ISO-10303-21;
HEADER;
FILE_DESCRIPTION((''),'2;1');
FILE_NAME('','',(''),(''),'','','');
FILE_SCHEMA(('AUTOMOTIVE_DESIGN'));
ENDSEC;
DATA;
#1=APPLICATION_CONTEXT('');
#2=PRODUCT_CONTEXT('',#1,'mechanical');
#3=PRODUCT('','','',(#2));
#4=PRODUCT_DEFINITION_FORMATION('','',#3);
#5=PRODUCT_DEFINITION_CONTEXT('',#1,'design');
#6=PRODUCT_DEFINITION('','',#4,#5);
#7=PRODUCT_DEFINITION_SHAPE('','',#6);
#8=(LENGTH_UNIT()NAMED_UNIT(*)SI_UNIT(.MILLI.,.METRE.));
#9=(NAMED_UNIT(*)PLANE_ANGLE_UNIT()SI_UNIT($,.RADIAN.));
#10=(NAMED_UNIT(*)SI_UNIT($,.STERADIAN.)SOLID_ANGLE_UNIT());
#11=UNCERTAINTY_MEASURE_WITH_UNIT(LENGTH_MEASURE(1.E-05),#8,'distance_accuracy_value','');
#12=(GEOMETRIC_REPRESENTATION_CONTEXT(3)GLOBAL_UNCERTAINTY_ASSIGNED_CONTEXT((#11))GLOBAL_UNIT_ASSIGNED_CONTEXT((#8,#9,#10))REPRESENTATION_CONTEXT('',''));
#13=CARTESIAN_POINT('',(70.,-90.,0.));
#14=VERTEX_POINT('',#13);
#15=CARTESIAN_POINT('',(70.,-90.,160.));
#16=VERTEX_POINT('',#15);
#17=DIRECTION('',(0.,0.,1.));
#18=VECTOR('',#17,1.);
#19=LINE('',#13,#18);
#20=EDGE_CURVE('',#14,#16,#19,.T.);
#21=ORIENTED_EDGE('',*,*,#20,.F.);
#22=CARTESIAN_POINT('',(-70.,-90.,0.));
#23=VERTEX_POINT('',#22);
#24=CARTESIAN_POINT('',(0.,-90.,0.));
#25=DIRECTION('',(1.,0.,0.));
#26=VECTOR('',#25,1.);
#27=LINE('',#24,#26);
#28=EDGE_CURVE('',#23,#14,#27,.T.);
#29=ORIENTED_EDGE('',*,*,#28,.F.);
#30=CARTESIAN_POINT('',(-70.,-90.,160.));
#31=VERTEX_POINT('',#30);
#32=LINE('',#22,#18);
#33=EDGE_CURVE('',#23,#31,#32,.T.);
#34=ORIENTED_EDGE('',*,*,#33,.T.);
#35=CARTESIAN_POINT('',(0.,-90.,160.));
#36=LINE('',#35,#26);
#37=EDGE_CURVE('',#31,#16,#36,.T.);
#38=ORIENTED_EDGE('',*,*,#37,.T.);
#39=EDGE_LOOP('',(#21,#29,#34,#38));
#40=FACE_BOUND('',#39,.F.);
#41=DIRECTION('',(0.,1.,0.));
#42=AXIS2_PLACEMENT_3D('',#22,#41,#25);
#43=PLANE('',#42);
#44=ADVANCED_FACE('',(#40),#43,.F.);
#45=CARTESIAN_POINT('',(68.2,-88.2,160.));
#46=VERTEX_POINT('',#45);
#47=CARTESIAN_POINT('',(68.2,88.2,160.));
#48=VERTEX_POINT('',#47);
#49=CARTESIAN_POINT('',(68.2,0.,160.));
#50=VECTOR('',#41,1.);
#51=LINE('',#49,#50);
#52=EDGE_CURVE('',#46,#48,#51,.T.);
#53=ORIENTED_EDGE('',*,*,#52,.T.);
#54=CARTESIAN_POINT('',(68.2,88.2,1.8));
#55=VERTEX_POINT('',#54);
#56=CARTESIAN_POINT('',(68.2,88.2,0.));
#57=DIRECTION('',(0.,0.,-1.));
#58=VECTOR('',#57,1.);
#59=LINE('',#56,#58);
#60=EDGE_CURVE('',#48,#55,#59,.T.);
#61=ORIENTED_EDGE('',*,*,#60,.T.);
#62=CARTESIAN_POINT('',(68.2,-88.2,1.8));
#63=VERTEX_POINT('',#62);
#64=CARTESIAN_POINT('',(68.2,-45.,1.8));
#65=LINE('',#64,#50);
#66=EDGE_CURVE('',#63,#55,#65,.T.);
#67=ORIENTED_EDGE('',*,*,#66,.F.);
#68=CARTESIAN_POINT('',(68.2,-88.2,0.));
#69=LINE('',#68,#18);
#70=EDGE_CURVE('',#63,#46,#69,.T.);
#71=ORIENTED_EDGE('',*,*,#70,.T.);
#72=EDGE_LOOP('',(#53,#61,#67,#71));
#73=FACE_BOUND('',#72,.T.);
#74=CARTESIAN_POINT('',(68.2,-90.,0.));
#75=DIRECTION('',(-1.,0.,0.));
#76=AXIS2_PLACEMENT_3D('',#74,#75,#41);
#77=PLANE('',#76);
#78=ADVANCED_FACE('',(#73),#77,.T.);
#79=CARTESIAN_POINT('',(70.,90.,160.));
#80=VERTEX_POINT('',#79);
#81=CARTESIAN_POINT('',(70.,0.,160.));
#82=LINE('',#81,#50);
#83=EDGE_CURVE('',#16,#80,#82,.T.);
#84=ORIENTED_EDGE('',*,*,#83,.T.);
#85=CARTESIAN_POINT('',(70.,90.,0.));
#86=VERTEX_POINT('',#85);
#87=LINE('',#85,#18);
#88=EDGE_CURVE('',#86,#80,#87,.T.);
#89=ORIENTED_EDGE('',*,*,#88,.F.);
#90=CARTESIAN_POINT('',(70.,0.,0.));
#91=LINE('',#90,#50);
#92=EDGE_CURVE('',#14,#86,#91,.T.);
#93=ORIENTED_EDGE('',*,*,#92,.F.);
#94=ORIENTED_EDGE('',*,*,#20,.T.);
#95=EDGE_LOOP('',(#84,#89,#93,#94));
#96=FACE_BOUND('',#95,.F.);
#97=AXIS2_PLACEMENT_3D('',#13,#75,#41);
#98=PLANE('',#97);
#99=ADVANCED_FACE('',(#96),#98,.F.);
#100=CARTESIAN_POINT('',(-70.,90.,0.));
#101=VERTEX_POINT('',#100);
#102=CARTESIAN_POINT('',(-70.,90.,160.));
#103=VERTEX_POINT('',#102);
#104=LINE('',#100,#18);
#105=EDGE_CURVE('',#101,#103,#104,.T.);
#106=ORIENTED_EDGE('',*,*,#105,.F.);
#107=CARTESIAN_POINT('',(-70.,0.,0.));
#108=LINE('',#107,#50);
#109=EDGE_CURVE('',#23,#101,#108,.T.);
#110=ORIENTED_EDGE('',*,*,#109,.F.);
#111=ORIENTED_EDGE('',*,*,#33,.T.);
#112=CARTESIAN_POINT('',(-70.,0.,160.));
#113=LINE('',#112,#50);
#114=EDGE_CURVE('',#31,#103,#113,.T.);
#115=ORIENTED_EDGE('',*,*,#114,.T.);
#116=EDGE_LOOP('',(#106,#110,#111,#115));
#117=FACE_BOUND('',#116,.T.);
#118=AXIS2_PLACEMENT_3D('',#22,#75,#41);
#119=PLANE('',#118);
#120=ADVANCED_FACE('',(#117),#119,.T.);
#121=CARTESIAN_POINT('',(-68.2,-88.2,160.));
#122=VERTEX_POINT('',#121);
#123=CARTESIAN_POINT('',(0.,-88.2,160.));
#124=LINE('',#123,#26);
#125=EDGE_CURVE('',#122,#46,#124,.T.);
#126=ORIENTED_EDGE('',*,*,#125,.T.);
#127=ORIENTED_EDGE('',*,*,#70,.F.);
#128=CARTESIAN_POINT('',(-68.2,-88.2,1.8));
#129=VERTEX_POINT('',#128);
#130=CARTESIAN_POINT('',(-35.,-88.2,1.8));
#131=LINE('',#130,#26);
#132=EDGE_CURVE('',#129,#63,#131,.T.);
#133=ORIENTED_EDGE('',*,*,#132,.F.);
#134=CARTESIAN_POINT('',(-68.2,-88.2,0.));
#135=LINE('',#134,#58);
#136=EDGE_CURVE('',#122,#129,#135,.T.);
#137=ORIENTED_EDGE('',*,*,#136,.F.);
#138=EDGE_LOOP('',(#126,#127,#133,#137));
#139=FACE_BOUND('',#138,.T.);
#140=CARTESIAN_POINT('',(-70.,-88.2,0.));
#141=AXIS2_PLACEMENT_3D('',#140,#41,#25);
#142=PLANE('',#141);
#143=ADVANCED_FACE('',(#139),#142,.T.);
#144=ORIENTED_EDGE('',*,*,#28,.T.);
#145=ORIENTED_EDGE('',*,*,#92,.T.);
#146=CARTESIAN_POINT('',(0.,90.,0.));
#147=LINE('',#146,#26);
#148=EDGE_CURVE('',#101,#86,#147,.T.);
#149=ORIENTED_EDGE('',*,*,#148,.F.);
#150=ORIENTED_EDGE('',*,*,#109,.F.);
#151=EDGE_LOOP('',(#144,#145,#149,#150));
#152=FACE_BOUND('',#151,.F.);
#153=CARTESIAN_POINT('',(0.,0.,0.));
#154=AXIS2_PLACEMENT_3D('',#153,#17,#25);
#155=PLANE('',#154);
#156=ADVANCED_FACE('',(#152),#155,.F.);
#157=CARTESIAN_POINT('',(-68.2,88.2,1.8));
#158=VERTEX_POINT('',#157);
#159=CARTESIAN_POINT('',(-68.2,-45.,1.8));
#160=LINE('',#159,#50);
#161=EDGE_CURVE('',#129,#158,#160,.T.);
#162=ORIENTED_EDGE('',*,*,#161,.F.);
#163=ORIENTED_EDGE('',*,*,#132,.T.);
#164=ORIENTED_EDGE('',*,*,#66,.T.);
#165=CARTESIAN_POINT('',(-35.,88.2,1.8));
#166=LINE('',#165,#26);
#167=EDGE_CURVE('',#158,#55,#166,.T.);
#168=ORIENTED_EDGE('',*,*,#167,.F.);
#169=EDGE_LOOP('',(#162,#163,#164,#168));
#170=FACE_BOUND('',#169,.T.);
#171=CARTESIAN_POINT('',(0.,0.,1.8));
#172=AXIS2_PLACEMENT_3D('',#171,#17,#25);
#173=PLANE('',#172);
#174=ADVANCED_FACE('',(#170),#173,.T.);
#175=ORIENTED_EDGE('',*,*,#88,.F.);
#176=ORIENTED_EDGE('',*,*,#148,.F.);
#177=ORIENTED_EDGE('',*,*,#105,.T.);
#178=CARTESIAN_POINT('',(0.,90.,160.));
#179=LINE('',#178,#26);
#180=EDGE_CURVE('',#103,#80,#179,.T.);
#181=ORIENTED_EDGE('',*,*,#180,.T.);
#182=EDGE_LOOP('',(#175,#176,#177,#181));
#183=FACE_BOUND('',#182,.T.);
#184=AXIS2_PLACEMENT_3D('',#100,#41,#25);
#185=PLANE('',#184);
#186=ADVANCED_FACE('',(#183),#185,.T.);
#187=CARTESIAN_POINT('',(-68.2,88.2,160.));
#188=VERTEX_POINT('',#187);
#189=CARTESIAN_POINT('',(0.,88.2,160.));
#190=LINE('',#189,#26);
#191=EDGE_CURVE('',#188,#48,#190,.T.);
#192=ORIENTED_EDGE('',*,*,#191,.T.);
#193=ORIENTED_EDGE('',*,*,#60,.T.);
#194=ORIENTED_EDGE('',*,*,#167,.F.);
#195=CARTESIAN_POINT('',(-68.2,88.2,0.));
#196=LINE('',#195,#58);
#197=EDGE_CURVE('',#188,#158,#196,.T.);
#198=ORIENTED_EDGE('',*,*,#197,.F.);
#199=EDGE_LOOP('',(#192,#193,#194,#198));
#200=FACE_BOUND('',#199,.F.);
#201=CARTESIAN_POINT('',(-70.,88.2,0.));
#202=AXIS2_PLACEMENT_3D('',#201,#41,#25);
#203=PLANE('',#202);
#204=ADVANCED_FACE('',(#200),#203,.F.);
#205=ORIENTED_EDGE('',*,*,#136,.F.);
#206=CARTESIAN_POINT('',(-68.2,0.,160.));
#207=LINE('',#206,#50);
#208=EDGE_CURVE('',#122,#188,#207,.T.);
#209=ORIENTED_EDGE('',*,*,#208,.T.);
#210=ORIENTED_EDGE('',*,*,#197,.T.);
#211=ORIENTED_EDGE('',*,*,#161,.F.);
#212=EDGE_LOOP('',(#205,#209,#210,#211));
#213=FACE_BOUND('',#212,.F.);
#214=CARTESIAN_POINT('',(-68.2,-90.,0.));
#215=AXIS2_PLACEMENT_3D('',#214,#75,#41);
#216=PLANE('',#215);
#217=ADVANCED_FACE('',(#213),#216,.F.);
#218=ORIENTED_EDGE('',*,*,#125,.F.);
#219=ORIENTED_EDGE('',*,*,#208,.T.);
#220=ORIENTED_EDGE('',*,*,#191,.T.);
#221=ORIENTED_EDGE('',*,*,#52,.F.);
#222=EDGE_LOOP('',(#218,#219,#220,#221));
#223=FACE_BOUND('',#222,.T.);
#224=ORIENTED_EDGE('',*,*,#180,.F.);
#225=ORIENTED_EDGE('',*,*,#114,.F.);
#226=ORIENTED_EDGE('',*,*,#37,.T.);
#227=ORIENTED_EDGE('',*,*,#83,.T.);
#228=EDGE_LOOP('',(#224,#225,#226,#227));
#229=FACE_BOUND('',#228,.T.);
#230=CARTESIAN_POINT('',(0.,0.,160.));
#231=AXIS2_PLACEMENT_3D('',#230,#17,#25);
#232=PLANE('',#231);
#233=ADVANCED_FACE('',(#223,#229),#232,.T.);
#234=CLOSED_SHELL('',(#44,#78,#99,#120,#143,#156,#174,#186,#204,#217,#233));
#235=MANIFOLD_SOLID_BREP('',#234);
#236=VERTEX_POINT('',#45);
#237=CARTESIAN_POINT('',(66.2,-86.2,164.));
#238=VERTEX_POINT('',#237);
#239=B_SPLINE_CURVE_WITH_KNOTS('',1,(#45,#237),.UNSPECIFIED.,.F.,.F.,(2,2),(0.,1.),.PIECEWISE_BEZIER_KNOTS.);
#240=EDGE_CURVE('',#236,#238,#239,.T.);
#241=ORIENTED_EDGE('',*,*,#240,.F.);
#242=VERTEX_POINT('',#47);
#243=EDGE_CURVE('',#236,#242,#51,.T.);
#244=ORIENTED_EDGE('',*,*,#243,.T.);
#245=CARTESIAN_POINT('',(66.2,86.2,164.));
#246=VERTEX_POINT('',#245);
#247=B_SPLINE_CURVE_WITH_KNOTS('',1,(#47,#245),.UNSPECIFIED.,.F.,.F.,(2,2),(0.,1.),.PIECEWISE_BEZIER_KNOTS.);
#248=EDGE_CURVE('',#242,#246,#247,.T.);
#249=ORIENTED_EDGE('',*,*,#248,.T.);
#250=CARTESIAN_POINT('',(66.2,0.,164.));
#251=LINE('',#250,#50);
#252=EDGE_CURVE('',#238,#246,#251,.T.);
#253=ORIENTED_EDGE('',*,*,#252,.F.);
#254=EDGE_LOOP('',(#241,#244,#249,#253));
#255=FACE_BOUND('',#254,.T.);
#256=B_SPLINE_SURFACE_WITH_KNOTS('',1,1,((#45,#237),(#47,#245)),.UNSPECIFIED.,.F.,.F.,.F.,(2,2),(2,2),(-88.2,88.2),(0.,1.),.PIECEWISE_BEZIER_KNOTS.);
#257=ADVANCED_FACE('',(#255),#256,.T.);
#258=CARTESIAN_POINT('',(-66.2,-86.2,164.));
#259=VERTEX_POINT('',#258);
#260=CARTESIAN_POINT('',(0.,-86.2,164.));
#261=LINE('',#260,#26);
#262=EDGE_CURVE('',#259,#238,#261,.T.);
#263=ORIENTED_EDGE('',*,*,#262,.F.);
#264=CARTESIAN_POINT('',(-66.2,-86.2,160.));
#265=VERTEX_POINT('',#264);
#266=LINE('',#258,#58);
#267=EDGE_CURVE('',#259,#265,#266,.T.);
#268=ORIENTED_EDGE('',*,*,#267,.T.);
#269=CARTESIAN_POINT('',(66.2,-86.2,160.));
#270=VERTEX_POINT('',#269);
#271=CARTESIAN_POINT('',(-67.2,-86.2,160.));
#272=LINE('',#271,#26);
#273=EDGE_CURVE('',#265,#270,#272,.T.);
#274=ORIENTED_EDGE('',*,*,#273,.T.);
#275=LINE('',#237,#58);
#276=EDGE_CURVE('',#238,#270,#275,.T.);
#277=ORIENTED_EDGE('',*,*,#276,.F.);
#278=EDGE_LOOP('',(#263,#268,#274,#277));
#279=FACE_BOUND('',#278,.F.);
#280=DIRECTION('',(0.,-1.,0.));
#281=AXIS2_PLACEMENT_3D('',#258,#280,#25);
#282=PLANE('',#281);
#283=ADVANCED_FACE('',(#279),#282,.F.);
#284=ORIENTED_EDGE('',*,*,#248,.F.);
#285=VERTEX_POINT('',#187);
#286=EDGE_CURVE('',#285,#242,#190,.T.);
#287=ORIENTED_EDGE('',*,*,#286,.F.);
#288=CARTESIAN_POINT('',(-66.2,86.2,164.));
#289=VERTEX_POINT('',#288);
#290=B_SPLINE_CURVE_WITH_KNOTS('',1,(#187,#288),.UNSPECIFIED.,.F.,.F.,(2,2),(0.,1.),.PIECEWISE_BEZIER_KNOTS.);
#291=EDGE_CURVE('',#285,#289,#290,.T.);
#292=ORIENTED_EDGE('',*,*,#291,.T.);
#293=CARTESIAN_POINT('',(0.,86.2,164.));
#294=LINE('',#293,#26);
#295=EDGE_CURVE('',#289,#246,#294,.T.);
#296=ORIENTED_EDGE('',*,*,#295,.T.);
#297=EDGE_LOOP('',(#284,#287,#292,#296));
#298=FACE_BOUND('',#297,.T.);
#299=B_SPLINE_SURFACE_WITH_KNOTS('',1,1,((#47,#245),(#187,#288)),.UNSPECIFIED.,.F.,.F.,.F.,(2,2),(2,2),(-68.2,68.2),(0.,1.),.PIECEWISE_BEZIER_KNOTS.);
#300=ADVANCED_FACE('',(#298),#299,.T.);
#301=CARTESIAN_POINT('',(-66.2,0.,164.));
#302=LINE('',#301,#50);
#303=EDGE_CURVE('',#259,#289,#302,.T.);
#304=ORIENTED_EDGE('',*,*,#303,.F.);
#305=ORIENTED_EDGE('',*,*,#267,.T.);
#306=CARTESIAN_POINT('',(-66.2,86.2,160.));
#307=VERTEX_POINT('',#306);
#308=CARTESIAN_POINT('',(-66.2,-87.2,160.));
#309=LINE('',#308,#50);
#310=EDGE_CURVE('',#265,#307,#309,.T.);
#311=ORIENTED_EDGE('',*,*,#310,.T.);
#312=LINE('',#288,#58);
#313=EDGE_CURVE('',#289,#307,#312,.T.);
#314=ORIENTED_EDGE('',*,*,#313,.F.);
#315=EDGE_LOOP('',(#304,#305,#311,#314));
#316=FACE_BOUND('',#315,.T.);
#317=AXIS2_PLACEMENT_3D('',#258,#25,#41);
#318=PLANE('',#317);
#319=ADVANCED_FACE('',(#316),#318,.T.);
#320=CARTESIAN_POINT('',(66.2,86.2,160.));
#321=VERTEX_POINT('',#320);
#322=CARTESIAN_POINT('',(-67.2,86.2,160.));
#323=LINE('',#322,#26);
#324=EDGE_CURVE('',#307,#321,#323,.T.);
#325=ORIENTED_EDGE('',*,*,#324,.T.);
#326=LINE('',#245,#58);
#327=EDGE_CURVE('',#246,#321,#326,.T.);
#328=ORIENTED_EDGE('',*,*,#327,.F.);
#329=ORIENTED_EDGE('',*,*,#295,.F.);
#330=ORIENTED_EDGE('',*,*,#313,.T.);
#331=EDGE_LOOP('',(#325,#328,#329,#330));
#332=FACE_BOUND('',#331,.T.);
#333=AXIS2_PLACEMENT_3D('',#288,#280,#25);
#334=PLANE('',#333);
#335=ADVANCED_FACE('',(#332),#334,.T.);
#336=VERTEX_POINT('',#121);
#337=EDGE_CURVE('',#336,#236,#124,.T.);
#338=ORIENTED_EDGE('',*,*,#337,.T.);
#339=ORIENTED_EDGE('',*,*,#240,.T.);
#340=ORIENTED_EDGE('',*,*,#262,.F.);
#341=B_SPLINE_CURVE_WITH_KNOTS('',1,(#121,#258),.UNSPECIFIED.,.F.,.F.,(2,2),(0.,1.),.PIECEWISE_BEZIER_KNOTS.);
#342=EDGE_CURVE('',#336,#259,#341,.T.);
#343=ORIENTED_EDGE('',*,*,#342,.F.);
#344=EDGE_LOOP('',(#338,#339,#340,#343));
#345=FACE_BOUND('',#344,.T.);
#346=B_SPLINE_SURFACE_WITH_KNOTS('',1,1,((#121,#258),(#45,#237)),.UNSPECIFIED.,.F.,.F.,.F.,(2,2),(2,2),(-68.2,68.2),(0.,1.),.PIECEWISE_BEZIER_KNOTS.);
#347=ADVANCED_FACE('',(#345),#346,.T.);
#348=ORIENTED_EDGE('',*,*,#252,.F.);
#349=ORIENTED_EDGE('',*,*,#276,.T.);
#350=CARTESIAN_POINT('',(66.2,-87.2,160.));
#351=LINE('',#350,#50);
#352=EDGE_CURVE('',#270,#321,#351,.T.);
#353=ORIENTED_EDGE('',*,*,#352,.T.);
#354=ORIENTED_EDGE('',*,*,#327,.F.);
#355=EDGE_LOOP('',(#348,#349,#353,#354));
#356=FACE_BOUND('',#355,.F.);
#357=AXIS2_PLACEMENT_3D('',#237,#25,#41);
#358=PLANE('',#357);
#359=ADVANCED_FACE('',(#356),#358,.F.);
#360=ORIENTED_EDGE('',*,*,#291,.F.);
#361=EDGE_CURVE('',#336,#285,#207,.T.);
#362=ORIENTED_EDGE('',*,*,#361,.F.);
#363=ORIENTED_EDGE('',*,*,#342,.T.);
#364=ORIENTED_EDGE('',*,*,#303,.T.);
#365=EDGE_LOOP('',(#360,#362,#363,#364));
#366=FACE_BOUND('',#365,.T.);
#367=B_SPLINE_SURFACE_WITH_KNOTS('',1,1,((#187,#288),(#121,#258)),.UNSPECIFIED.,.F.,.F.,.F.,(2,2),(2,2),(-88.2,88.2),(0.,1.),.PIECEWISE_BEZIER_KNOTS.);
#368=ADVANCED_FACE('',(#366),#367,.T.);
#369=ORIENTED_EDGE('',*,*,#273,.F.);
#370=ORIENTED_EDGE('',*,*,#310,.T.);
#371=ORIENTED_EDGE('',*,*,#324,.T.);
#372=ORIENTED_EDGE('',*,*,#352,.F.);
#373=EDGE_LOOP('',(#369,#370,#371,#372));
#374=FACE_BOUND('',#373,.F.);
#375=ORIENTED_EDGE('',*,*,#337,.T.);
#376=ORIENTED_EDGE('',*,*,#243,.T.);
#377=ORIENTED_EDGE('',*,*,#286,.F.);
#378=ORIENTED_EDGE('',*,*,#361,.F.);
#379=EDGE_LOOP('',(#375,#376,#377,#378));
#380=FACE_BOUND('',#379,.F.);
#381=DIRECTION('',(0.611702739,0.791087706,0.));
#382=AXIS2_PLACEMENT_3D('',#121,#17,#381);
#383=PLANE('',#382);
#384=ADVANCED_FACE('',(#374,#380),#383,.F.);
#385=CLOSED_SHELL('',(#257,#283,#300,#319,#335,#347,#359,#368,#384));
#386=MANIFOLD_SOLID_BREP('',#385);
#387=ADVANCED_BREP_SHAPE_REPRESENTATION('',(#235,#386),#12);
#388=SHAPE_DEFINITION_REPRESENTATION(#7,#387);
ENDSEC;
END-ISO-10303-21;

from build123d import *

# Parameters (mm, degrees)
F0_W     = 140
F0_H     = 180
F1_DEPTH = 160
F2_T     = -1.8
F3_W     = 136.4
F3_H     = 176.4
F5_W     = 132.4
F5_H     = 172.4
F8_DEPTH = 25


# Not quite as in the source:
# - the program builds the solid bodies; features that only make, move or delete a surface that nothing else refers to are left out


with BuildPart() as f1:
    # F0 (on Top) → F1 (new body)
    with BuildSketch(Plane.XY):
        Rectangle(F0_W, F0_H)
    extrude(amount=F1_DEPTH)

    # F2
    f2_openings = [f1.faces().sort_by_distance(p)[0] for p in [
        (0, 0, 160),
    ]]
    offset(amount=F2_T, openings=f2_openings)


with BuildPart() as f7:
    # F3 (on face) → F7 section 0
    with BuildSketch(Plane.XY.offset(160)):
        Rectangle(F3_W, F3_H)
    # F5 (on offset) → F7 section 1
    with BuildSketch(Plane.XY.offset(164)):
        Rectangle(F5_W, F5_H)
    loft()

    # F5 (on offset) → F8 (cut)
    with BuildSketch(Plane.XY.offset(164)):
        Rectangle(F5_W, F5_H)
    extrude(amount=-F8_DEPTH, mode=Mode.SUBTRACT)


solid = Compound([f1.part, f7.part])
